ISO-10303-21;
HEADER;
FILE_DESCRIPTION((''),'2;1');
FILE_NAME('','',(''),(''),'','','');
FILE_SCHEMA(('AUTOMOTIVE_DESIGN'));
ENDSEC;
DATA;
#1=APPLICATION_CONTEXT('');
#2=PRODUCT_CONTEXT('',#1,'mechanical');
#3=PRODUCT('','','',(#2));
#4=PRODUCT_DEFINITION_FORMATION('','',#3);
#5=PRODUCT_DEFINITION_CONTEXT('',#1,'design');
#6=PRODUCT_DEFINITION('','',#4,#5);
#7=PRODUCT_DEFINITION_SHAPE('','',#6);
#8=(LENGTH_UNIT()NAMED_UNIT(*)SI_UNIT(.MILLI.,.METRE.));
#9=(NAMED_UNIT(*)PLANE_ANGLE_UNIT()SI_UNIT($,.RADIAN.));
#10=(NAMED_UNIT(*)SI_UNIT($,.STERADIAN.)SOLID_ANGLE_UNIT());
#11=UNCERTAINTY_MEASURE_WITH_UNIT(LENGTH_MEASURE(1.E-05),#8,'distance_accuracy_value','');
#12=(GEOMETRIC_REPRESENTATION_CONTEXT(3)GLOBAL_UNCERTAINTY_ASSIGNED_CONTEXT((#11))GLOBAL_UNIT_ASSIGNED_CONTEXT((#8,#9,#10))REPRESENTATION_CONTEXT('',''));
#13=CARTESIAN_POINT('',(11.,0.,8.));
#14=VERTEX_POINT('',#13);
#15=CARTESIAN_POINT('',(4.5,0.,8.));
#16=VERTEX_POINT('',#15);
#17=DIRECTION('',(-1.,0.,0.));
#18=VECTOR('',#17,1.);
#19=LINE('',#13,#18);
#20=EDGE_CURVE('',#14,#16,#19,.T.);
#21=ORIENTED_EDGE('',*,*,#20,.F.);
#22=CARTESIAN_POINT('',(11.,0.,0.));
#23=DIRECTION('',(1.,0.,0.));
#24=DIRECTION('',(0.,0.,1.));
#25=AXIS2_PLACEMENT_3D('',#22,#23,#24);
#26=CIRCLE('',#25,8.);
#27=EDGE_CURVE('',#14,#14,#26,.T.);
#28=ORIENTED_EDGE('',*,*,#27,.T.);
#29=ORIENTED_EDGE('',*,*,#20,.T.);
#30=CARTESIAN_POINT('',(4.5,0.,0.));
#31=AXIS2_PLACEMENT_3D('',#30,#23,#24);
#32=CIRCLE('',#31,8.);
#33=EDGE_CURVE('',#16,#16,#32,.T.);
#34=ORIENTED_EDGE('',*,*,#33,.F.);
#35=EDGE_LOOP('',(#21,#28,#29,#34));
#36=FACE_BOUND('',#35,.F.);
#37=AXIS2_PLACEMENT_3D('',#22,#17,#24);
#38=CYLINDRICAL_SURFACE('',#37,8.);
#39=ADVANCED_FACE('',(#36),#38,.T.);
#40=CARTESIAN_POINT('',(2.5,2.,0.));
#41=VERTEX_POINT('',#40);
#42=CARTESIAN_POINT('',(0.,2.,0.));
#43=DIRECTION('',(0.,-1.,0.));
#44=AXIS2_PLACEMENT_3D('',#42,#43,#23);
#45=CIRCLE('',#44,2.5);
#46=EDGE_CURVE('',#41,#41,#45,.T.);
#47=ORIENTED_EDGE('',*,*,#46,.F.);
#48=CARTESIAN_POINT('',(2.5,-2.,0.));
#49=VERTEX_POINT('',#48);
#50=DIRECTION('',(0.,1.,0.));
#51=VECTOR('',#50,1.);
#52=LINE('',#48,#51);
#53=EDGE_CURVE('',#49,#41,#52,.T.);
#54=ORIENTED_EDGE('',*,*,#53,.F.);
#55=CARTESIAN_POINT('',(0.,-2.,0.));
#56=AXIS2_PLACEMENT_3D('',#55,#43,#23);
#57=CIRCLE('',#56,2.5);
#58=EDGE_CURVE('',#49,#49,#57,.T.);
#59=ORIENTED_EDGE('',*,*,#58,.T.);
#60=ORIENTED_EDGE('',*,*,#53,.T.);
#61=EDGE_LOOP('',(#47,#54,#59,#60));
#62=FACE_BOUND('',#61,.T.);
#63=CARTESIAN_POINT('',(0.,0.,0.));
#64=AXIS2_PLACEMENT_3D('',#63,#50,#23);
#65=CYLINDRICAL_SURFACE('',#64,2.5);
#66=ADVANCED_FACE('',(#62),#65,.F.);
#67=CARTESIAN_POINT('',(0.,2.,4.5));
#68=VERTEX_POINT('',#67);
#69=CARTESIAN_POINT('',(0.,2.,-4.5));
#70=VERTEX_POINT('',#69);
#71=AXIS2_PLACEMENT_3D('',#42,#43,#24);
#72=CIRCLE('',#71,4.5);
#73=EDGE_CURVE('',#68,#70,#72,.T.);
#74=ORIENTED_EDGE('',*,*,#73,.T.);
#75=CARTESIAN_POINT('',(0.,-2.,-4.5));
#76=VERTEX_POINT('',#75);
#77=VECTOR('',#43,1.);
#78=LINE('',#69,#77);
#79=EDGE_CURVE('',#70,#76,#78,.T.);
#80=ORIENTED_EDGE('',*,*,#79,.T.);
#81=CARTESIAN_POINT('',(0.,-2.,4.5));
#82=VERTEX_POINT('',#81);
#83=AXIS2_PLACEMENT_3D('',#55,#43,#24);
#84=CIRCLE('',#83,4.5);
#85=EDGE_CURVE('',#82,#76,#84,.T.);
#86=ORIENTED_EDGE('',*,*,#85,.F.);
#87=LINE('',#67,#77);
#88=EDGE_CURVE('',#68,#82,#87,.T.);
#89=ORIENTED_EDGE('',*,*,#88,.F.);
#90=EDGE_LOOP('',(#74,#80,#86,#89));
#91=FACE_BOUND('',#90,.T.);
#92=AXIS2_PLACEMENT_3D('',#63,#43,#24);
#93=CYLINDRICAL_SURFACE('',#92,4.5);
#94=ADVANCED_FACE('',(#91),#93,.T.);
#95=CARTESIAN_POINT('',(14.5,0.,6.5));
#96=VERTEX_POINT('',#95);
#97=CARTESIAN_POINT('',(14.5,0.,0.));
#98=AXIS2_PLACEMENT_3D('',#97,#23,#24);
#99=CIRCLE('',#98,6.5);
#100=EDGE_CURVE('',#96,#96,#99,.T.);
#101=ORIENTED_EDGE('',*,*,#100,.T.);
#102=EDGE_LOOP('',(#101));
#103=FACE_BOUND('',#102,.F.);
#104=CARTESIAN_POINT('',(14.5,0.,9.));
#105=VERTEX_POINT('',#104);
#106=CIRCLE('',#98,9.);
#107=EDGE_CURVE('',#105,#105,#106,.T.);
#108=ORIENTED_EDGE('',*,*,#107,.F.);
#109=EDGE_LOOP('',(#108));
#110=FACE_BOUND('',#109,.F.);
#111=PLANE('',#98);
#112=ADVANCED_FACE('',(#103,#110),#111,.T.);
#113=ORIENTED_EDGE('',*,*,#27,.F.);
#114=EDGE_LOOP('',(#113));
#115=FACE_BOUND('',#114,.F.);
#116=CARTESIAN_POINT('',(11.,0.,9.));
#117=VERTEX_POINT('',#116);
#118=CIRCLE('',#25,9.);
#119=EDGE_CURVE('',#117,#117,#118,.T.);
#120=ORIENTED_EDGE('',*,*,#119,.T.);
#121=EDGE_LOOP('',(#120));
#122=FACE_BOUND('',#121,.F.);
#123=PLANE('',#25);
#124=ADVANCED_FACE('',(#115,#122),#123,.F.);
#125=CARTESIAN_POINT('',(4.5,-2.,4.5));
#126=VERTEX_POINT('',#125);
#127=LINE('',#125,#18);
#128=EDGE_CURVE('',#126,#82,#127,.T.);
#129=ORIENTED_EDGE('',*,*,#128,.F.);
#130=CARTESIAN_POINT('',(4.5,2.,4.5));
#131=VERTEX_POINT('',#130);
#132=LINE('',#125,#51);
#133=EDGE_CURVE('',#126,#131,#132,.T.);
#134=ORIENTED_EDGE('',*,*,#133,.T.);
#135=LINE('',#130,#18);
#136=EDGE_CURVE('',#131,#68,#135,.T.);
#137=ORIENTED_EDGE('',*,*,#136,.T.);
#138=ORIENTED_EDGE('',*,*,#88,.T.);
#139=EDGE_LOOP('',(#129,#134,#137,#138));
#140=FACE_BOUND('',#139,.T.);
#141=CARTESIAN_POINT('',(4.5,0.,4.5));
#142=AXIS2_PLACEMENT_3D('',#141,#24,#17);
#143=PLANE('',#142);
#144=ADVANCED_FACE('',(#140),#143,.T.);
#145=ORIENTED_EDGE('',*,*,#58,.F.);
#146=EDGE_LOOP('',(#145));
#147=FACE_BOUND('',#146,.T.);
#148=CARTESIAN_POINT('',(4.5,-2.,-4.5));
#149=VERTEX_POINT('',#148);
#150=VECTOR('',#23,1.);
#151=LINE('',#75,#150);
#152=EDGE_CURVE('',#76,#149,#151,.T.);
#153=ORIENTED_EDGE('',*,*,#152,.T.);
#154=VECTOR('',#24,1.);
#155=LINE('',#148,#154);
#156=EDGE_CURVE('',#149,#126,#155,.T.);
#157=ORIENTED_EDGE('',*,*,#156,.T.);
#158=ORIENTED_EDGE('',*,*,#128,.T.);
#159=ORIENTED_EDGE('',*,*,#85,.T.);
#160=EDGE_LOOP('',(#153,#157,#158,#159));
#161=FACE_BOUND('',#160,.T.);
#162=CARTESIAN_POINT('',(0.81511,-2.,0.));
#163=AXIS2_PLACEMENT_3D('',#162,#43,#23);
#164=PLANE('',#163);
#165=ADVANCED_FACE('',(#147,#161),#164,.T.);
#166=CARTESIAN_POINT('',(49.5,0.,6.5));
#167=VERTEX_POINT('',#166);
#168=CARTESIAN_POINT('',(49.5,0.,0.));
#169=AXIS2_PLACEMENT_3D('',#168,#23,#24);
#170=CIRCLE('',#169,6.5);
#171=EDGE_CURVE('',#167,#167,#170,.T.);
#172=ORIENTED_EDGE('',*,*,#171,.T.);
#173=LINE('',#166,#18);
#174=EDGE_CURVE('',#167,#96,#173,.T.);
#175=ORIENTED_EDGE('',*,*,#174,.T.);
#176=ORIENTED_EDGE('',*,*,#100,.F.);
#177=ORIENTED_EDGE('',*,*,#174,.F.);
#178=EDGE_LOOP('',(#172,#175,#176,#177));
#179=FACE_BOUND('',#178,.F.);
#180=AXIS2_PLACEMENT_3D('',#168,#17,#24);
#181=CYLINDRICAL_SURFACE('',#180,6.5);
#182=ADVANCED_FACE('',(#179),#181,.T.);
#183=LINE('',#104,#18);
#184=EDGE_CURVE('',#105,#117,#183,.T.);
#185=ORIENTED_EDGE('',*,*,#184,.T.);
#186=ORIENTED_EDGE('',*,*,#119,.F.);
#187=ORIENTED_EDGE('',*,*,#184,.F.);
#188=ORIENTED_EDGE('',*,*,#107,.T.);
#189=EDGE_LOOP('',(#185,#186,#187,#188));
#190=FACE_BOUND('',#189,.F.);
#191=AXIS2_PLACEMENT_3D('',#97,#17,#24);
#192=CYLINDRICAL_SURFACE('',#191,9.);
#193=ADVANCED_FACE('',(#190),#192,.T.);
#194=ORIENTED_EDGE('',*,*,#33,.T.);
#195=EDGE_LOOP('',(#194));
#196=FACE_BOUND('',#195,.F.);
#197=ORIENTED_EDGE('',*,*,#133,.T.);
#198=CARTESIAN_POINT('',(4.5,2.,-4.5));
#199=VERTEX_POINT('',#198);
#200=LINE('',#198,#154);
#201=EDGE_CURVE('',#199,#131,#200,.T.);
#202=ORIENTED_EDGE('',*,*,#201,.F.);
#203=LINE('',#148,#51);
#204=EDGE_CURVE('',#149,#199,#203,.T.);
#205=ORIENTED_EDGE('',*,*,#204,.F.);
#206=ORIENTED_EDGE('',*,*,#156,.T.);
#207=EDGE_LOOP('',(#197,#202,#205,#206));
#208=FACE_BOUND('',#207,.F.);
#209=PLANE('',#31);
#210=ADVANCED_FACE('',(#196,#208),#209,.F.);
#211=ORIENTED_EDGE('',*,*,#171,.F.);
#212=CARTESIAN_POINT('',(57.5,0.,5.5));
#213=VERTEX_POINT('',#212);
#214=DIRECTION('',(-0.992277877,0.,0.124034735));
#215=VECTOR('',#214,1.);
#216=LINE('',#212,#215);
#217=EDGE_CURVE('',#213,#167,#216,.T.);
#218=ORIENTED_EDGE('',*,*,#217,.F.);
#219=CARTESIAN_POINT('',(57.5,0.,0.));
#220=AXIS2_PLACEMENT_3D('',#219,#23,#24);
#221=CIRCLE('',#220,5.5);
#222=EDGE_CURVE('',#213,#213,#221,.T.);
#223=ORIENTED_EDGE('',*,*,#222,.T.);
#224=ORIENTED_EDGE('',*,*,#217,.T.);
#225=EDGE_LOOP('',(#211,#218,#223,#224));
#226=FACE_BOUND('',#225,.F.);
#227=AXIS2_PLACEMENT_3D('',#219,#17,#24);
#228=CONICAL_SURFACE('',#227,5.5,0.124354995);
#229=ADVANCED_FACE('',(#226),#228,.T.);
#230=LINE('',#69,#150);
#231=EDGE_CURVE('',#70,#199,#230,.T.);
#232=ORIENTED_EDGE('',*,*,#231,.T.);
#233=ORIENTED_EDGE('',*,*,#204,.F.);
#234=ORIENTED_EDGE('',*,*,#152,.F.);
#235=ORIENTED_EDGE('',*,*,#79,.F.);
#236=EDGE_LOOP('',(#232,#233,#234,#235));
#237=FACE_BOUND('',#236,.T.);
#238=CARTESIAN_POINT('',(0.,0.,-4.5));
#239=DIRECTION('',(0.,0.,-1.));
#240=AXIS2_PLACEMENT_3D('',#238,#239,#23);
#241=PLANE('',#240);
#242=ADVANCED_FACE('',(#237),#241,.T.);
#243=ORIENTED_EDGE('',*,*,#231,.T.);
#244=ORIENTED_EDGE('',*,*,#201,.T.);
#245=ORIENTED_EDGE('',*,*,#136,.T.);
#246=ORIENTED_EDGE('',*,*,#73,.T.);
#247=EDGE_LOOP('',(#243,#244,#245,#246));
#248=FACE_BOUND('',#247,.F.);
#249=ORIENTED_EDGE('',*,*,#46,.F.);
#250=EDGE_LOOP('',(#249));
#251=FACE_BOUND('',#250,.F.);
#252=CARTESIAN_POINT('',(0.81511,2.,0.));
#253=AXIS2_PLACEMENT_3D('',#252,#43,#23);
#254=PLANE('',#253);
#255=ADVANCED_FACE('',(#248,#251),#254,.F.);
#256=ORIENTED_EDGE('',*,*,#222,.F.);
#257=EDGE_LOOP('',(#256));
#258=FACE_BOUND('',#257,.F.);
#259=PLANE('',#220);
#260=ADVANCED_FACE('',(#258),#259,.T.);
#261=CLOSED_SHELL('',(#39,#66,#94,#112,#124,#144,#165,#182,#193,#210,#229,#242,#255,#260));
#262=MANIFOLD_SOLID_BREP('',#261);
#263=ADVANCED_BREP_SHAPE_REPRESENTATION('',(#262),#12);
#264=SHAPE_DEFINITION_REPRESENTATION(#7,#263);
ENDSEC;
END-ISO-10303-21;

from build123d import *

# Parameters (mm, degrees)
F0_R     = 2.5
F1_DEPTH = 2


# Not quite as in the source:
# - a feature names something its author has since deleted; it is built from what else it names


with BuildPart() as f1:
    # F0 (on Front) → F1 (new body, symmetric)
    with BuildSketch(Plane.XZ):
        with BuildLine():
            Line((4.5, 4.5), (0, 4.5))
            ThreePointArc((0, 4.5), (-4.5, 0), (0, -4.5))
            Line((0, -4.5), (4.5, -4.5))
            Line((4.5, -4.5), (4.5, 0))
            Line((4.5, 0), (4.5, 4.5))
        make_face()
        Circle(F0_R, mode=Mode.SUBTRACT)
    extrude(amount=F1_DEPTH, both=True)

    # F0 (on Front) → F2 (revolve)
    with BuildSketch(Plane.XZ):
        Polygon((4.5, 8), (4.5, 4.5), (4.5, 0), (57.5, 0), (57.5, 5.5), (49.5, 6.5), (14.5, 6.5), (14.5, 9), (11, 9), (11, 8), align=None)
    revolve(axis=Axis((31, 0, 0), (1, 0, 0)))


solid = f1.part
